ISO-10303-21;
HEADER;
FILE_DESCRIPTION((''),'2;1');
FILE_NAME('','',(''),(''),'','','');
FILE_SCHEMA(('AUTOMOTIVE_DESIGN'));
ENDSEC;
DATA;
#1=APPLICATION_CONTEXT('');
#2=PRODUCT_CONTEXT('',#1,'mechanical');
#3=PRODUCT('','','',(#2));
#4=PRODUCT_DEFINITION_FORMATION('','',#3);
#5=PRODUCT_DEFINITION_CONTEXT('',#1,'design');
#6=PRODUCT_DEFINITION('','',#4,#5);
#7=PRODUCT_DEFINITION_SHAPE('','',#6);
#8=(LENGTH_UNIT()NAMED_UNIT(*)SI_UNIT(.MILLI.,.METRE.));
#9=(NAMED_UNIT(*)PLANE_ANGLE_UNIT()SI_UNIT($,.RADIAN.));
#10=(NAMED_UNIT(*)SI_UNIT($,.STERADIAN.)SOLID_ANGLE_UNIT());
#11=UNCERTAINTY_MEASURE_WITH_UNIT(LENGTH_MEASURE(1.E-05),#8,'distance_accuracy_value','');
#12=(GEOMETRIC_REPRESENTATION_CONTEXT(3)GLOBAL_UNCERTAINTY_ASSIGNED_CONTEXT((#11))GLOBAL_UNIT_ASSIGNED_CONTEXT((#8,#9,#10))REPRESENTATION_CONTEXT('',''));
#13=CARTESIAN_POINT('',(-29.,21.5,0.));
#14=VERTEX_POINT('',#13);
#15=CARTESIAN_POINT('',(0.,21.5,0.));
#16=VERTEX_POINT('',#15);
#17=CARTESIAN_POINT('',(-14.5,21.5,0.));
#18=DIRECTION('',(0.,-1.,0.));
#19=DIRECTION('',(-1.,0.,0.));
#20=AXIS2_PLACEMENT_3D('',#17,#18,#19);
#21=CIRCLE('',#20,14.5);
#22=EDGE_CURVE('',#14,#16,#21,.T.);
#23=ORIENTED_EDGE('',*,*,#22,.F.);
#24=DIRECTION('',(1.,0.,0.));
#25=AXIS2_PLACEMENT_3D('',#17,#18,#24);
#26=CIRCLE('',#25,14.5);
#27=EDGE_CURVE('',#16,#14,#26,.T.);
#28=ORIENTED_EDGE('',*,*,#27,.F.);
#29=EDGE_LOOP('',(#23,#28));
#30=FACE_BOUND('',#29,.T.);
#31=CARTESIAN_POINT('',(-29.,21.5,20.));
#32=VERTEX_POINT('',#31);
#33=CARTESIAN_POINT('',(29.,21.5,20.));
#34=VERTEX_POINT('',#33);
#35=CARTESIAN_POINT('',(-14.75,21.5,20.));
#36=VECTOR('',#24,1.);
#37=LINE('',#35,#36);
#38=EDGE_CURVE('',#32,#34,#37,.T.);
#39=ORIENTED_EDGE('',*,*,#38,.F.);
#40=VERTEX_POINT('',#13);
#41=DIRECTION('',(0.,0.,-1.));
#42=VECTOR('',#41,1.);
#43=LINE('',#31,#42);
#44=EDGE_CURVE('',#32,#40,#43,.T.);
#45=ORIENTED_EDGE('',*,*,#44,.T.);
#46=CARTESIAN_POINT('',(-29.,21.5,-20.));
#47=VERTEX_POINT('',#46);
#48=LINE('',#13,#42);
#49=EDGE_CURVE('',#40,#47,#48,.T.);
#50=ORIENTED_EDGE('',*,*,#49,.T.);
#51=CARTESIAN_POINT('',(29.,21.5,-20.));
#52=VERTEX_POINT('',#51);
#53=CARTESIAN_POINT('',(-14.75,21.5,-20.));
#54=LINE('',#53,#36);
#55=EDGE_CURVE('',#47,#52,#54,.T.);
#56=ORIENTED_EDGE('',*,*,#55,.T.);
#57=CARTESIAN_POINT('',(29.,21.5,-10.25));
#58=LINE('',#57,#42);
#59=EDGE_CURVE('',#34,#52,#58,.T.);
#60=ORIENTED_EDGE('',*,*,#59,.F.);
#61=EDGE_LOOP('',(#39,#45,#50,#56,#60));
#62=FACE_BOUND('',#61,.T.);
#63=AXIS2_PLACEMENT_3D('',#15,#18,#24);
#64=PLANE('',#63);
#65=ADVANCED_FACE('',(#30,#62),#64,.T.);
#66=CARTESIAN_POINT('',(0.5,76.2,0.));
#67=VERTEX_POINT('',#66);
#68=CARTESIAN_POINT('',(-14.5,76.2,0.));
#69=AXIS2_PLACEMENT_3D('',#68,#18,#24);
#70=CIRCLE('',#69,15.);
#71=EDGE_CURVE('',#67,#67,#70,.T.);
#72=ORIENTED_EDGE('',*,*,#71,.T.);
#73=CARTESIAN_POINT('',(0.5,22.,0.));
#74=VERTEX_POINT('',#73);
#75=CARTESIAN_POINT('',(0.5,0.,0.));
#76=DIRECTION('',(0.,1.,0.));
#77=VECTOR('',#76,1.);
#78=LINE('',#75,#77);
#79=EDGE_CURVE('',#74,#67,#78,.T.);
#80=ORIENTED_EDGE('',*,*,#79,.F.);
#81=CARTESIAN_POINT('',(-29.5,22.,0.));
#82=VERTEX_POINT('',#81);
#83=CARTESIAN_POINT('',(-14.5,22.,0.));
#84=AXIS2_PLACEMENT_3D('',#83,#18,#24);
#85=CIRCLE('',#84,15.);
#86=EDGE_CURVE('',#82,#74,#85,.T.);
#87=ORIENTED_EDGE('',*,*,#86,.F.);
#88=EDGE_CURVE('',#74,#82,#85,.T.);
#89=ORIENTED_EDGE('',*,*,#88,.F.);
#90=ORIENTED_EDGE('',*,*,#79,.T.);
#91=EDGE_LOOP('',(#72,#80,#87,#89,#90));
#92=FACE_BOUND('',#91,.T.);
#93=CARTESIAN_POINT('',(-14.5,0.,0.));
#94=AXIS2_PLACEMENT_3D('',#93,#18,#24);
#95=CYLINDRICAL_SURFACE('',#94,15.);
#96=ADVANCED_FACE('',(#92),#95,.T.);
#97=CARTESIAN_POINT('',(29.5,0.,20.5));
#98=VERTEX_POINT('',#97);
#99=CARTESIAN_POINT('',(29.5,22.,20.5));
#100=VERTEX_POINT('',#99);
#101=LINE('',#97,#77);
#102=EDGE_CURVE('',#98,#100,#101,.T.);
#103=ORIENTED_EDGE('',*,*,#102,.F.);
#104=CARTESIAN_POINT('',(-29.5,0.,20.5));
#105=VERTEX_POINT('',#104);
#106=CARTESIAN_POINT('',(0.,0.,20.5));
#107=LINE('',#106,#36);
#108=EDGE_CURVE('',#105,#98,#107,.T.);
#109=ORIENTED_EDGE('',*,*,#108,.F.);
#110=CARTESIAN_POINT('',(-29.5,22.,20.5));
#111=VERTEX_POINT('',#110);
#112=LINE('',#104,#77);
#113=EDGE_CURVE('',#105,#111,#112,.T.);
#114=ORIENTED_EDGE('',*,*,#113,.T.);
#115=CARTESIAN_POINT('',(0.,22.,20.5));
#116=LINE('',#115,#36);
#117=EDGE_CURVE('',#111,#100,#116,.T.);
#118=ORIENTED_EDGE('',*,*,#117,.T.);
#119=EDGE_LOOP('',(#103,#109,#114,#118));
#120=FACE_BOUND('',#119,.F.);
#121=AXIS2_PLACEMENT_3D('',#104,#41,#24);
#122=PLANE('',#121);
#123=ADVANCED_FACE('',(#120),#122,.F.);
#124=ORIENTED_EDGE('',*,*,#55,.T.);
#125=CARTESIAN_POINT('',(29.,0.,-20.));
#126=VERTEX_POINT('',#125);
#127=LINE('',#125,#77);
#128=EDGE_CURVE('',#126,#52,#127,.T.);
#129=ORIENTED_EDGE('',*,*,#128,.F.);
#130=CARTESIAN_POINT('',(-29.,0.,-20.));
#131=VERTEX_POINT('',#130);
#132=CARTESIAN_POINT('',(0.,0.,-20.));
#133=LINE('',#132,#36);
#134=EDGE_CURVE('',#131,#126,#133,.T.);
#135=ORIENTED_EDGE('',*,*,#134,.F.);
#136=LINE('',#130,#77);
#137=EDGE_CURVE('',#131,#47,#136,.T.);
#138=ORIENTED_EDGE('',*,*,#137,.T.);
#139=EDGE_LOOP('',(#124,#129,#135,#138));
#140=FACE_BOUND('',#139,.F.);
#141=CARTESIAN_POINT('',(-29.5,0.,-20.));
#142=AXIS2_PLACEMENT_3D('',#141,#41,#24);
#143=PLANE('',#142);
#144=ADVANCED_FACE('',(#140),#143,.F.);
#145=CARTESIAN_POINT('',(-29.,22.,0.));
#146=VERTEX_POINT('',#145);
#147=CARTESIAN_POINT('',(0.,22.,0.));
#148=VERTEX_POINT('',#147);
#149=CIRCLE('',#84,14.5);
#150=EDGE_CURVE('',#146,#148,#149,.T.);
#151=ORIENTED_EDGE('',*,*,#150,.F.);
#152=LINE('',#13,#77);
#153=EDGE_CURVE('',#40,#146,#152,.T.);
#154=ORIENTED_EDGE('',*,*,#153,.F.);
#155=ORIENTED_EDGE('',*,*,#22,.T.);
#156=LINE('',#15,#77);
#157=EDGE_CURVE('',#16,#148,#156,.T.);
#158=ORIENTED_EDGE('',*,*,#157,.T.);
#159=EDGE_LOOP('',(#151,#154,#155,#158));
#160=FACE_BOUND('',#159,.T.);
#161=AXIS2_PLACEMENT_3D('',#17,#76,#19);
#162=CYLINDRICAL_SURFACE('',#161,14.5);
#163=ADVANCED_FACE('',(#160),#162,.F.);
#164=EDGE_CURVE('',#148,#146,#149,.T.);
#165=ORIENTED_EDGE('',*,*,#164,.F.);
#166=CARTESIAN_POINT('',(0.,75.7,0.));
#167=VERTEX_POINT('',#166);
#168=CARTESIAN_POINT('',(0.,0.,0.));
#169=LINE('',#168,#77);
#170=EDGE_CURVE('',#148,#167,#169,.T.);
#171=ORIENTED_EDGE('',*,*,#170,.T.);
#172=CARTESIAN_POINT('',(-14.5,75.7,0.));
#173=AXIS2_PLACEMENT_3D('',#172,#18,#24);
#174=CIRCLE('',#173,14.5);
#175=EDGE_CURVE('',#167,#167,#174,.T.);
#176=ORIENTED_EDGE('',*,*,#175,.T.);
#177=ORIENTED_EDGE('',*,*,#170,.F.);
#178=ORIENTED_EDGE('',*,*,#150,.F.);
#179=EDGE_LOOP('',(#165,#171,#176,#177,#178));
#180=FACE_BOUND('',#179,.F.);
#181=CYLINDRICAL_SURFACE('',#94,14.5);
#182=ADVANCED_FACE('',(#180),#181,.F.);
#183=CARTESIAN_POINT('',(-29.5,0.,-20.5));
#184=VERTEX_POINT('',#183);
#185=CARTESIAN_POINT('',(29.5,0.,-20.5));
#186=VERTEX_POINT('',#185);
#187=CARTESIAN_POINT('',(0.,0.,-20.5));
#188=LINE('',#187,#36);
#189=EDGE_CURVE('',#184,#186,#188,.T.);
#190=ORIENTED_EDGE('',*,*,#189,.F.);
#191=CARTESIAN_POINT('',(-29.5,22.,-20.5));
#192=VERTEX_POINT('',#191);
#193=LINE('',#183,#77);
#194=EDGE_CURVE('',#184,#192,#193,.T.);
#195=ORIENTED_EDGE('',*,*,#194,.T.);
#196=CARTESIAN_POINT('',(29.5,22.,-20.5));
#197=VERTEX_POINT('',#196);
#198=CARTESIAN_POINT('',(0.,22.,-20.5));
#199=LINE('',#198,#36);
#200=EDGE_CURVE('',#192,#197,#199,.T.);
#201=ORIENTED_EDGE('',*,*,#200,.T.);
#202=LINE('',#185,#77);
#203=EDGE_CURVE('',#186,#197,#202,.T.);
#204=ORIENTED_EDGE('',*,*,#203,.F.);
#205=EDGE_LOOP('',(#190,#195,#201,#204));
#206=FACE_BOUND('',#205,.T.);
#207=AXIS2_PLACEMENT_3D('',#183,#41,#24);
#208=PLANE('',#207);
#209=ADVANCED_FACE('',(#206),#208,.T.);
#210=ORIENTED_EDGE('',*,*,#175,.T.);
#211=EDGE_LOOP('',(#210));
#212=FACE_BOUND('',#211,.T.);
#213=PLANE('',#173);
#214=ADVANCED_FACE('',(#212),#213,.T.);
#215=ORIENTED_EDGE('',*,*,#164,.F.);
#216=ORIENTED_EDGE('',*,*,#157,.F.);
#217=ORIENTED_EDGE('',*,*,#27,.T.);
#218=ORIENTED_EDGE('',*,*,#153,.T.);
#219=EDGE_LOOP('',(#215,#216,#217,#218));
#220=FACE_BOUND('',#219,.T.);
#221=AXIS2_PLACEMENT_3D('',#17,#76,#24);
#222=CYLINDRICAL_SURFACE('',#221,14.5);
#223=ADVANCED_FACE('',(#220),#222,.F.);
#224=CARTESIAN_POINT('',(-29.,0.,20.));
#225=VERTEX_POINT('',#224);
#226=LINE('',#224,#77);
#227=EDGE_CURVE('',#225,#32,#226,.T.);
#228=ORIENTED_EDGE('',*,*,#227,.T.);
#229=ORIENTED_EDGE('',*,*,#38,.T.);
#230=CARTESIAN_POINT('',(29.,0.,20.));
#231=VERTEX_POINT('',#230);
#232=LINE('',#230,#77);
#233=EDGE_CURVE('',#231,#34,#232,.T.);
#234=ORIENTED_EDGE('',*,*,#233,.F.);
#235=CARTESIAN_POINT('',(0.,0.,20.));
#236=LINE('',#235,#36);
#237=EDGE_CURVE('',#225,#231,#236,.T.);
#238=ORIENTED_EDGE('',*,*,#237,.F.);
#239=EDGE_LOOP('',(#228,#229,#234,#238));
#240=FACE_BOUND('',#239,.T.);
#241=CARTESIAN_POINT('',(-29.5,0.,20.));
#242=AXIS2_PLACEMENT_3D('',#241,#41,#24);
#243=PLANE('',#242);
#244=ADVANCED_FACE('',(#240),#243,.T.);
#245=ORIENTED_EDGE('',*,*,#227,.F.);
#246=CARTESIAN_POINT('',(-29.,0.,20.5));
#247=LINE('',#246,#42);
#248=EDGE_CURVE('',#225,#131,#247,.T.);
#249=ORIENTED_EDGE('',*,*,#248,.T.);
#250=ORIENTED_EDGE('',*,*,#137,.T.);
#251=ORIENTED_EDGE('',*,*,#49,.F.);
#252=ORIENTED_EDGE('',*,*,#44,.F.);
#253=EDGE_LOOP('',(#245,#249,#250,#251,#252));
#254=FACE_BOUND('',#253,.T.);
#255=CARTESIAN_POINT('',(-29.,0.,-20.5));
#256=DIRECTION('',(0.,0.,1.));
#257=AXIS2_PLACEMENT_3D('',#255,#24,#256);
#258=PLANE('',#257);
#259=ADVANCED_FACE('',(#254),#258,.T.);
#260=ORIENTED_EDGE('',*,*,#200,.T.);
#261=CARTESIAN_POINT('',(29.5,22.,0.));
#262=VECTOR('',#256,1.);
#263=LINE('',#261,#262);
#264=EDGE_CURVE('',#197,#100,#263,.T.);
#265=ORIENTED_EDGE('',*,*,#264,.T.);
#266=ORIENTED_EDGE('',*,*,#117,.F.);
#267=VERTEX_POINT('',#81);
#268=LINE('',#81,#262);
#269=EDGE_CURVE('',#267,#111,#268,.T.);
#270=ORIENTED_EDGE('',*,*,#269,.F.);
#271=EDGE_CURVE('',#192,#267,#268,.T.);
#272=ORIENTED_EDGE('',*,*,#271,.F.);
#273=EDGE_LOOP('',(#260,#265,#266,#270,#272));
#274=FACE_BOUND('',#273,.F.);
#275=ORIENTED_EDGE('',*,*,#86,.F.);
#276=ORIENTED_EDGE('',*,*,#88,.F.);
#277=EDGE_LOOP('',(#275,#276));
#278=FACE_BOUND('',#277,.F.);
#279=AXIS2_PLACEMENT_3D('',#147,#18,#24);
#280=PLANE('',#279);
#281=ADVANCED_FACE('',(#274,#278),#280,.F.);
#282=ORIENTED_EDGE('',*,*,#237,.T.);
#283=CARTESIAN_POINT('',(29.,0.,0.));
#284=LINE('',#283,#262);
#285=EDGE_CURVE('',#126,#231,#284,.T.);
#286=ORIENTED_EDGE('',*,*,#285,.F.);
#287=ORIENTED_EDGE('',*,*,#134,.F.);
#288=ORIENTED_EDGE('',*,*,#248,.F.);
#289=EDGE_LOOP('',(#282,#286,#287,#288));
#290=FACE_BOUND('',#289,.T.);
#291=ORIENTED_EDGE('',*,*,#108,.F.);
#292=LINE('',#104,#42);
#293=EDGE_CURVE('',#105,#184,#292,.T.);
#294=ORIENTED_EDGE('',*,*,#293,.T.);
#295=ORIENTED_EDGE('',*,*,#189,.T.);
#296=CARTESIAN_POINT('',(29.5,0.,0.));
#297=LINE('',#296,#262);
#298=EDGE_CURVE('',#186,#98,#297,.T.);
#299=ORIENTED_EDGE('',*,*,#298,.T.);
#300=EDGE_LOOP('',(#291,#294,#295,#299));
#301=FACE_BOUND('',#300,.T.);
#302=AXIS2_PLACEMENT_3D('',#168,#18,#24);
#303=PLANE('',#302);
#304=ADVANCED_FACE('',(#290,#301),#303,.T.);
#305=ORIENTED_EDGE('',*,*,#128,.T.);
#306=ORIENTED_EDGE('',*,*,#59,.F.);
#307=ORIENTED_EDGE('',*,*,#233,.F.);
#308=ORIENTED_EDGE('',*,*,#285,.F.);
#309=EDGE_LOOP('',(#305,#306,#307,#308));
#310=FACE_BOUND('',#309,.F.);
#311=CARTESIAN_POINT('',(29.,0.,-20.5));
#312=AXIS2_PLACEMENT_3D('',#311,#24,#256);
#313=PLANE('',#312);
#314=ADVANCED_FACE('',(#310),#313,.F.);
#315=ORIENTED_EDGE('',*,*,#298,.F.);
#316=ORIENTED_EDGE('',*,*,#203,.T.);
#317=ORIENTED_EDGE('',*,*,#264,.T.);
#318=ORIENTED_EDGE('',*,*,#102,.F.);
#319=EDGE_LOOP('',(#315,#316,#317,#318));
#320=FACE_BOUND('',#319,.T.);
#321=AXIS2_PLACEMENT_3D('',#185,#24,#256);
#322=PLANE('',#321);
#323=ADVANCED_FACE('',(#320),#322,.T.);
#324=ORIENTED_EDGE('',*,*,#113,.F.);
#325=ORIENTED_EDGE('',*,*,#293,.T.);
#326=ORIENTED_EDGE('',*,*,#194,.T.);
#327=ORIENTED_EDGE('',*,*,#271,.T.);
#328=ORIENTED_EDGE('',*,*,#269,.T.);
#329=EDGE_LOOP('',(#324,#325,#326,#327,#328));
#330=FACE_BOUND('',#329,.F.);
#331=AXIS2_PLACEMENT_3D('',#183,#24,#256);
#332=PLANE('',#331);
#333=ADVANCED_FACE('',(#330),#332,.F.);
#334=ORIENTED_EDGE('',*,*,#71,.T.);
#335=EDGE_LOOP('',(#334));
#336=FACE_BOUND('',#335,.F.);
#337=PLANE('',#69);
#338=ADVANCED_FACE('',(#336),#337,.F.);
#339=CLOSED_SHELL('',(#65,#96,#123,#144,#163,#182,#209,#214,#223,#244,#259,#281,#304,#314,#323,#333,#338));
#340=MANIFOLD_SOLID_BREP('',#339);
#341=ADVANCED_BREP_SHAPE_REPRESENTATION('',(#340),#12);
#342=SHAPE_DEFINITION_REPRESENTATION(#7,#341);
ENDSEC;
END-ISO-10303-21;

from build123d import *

# Parameters (mm, degrees)
F0_W        = 59
F0_H        = 41
F1_DEPTH    = 22
F2_R        = 15
F3_DEPTH    = 76.2
F4_T        = 0.5
F4_T4_ANGLE = 180.000000001
F4_T6_ANGLE = 180.000000001


# Not quite as in the source:
# - a shell that OpenCascade refuses in one call is made with other operations: the cavity is built on its own and cut out


with BuildPart() as f1:
    # F0 (on Front) → F1 (new body)
    with BuildSketch(Plane.XZ):
        Rectangle(F0_W, F0_H)
    extrude(amount=-F1_DEPTH)

    # F2 (on Front) → F3 (join)
    with BuildSketch(Plane.XZ):
        with Locations((-14.5, 0)):
            Circle(F2_R)
    extrude(amount=-F3_DEPTH)

    # F4: shell of thickness 0.5, made by hand


with BuildPart() as f4_core1:
    # F4_t2: copy of F1
    add(f1.part)

    # the walls: a layer under each face that stays
    f4_faces = [f4_core1.faces().sort_by_distance(p)[0] for p in [
        (29.5, 11, 0),
        (0, 22, -13.6666666667),
        (-29.5, 49.1, 0),
        (-14.5, 76.2, 0),
        (-29.5, 11, 0),
        (0, 11, 20.5),
        (0, 11, -20.5),
    ]]
    thicken(f4_faces, amount=-F4_T, mode=Mode.SUBTRACT)

    # F4_s3 → F4_t4 (revolve, cut)
    with BuildSketch(Plane.XY):
        Polygon((-29.505, 22.005), (-29.5, 21.5), (-29, 21.5), (-29, 22), align=None)
    revolve(axis=Axis((-14.5, 22, 0), (0, -1, 0)), revolution_arc=F4_T4_ANGLE, mode=Mode.SUBTRACT)

    # F4_s5 → F4_t6 (revolve, cut)
    with BuildSketch(Plane.XY):
        Polygon((0.505, 22.005), (0.5, 21.5), (0, 21.5), (0, 22), align=None)
    revolve(axis=Axis((-14.5, 22, 0), (0, -1, 0)), revolution_arc=F4_T6_ANGLE, mode=Mode.SUBTRACT)


with BuildPart() as f1_1:
    add(f1.part)

    # what is left inside the walls is the cavity
    f4_cavity = [f4_core1.part.solids().sort_by_distance(p)[0] for p in [
        (-28.995, 57.8, 0),
    ]]
    add(f4_cavity, mode=Mode.SUBTRACT)


solid = f1_1.part
